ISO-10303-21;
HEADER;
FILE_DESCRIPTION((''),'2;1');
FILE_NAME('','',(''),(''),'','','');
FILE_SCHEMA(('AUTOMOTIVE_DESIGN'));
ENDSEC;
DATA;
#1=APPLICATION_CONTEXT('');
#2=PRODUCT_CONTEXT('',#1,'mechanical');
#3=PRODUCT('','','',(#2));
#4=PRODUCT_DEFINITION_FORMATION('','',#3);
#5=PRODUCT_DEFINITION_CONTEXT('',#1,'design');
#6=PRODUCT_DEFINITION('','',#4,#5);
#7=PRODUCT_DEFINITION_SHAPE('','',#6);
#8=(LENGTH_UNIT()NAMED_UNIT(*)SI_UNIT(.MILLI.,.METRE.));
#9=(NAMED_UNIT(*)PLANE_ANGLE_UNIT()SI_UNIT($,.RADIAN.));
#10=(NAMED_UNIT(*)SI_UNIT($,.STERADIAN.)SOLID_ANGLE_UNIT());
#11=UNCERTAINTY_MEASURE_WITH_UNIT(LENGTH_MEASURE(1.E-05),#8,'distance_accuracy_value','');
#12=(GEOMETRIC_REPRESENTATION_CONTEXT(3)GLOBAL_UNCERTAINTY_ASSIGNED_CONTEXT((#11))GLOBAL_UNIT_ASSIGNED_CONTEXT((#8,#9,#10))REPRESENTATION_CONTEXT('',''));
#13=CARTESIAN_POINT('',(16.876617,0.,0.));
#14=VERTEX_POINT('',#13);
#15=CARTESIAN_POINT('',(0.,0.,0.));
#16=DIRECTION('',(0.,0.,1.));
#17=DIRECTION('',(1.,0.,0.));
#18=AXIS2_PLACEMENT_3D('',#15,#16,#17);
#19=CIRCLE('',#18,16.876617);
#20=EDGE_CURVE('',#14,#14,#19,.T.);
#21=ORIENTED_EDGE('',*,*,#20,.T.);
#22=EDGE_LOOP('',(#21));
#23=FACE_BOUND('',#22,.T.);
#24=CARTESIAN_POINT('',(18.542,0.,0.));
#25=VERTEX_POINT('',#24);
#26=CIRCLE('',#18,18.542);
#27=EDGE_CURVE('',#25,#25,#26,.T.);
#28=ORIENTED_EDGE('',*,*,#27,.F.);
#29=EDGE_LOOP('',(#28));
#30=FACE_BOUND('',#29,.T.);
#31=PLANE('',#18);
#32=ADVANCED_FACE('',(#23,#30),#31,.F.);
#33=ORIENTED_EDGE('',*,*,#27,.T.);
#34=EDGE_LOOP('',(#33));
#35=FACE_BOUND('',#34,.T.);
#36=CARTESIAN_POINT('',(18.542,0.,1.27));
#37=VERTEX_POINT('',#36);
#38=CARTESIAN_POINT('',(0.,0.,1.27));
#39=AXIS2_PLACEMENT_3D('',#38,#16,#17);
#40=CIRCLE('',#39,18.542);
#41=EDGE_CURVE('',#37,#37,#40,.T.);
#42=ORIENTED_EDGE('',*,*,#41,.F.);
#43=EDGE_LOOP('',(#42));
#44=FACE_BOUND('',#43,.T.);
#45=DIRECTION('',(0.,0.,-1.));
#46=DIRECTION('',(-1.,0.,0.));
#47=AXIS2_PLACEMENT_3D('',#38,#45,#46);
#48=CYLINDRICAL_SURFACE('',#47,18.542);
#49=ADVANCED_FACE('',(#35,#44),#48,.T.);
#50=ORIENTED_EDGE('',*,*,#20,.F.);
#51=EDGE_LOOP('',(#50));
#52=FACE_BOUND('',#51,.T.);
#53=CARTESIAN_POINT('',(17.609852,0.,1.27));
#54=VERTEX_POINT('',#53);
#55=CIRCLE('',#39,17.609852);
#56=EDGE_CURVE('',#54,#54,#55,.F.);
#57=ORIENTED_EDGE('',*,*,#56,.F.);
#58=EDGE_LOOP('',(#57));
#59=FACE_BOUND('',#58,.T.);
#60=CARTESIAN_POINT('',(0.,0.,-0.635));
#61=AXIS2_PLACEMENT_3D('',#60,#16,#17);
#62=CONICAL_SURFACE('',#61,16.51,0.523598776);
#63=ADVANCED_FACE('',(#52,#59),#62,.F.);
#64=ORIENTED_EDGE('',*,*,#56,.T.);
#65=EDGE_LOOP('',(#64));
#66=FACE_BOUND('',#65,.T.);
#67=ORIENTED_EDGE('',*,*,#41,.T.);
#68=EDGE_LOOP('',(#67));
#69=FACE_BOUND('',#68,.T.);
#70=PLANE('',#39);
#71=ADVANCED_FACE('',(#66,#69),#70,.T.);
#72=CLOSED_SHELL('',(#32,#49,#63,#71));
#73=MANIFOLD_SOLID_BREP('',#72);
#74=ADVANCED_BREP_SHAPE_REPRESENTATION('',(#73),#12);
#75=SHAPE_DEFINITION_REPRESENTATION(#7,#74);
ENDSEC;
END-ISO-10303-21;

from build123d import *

# Parameters (mm, degrees)
SKETCH1_R           = 18.542
SKETCH1_R_2         = 16.51
BOSS_EXTRUDE1_DEPTH = 1.27
CHAMFER1_SIZE       = 1.905
CHAMFER1_SIZE_2     = 1.099852263


with BuildPart() as part:
    # Sketch1 → Boss-Extrude1 (new body)
    with BuildSketch(Plane.XY):
        Circle(SKETCH1_R)
        Circle(SKETCH1_R_2, mode=Mode.SUBTRACT)
    extrude(amount=BOSS_EXTRUDE1_DEPTH)

    # Chamfer1
    # the kernel refuses this chamfer: 1.905, 1.099852263 mm, written as the material it takes off along each edge
    with BuildSketch(Plane(origin=(0, 0, 1.27), x_dir=(1, 0, 0), z_dir=(0, -1, 0))) as chamfer1_piece_1:
        Polygon((16.51, -CHAMFER1_SIZE), (16.51 + CHAMFER1_SIZE_2, 0), (16.51, 0), align=None)
    revolve(axis=Axis((0, 0, 1.27), (0, 0, 1)), mode=Mode.SUBTRACT)


solid = part.part
